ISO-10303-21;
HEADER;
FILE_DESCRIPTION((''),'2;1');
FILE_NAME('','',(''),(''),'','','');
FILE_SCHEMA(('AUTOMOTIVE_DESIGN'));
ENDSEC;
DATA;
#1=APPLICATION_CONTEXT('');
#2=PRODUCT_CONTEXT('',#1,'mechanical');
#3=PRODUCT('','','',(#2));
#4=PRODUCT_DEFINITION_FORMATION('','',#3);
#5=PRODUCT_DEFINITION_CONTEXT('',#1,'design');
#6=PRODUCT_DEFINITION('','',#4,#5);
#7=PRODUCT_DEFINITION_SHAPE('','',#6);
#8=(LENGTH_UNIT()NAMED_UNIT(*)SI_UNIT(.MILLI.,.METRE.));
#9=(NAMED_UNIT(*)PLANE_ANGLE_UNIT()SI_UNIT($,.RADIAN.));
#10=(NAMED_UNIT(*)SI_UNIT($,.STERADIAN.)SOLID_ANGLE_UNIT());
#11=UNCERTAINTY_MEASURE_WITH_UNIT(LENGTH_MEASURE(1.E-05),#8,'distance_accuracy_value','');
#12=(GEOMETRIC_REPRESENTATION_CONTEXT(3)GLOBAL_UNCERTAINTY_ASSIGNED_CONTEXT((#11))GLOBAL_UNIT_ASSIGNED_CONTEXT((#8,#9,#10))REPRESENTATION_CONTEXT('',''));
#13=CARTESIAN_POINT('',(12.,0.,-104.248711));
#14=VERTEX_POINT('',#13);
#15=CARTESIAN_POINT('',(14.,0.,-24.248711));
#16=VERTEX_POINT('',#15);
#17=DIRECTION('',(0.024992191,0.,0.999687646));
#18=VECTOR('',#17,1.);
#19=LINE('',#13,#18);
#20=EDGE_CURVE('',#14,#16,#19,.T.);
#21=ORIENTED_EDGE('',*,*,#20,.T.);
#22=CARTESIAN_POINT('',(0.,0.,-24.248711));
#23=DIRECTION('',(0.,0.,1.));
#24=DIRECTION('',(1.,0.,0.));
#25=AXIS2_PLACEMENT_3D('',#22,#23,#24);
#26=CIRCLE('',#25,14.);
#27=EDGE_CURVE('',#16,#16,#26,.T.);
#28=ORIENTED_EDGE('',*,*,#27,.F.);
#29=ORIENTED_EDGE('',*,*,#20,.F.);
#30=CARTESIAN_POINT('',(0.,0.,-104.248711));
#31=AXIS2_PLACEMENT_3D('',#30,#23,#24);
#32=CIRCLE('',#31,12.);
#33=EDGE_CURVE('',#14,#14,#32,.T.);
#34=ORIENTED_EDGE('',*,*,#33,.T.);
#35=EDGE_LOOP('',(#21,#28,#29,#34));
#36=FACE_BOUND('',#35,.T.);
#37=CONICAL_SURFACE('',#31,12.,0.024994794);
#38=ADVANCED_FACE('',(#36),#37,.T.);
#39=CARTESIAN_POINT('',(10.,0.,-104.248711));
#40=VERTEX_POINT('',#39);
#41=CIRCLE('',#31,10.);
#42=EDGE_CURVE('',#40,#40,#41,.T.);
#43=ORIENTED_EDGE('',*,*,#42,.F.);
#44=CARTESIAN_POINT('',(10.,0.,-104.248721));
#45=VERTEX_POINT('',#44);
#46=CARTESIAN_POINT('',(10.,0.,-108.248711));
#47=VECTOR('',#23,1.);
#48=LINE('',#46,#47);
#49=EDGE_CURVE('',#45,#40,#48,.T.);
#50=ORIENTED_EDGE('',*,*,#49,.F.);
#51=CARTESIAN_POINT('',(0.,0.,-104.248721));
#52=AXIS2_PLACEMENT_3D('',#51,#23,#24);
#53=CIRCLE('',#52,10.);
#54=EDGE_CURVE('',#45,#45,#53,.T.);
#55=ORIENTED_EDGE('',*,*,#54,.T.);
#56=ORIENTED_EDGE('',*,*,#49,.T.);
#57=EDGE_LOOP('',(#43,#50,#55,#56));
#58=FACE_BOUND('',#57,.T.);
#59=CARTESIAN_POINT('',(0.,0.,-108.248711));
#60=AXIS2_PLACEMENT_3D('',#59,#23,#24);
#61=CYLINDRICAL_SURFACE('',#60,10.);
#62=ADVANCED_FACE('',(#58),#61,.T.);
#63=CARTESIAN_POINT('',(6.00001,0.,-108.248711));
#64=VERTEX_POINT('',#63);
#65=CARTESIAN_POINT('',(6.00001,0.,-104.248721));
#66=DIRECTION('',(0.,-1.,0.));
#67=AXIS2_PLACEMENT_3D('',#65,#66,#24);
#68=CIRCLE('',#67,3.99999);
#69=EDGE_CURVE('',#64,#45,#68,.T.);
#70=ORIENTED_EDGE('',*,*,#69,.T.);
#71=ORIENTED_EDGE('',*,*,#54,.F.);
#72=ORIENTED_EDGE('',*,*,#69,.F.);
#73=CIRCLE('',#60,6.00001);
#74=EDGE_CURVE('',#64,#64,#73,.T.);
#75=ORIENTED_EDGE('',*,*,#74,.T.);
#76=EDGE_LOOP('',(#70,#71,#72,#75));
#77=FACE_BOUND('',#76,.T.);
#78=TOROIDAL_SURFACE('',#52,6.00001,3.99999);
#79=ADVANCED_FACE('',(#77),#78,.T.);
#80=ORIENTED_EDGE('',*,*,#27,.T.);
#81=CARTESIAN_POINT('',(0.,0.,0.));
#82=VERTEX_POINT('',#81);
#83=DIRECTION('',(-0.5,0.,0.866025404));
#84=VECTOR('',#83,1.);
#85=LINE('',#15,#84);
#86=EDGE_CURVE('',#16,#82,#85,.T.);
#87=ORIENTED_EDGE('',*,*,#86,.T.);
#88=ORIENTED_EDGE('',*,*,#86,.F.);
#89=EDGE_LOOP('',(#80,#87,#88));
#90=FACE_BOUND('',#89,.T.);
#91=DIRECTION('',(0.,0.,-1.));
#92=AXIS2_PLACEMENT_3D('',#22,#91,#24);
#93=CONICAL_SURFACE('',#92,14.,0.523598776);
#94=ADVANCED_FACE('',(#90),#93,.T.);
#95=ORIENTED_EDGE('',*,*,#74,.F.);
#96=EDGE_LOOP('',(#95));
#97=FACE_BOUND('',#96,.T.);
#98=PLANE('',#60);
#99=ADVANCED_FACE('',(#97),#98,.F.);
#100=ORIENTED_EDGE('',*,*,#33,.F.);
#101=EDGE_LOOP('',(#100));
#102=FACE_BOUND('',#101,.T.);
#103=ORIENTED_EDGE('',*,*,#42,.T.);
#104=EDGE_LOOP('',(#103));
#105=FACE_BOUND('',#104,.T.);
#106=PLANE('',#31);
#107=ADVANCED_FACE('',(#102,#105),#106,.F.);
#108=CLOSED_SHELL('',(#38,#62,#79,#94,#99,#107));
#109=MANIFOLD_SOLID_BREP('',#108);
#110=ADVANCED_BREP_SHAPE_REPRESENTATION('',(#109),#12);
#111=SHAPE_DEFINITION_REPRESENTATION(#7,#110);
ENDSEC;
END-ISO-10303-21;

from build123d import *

# Parameters (mm, degrees)
F2_R = 3.99999


# Not quite as in the source:
# - a fillet or chamfer is up to 0.001 mm smaller than in the source, because OpenCascade refuses the exact size


with BuildPart() as f1:
    # F0 (on Front) → F1 (revolve)
    with BuildSketch(Plane.XZ):
        Polygon((14, -24.248711306), (0, 0), (0, -108.248711306), (10, -108.248711306), (10, -104.248711306), (12, -104.248711306), align=None)
    revolve(axis=Axis((0, 0, -54.124355653), (0, 0, 1)))

    # F2 (radius 4 in the source; OpenCascade refuses exactly that, so slightly less here)
    f2_edges = [f1.edges().sort_by_distance(p)[0] for p in [
        (-10, 0, -108.248711),
    ]]
    fillet(f2_edges, radius=F2_R)


solid = f1.part
